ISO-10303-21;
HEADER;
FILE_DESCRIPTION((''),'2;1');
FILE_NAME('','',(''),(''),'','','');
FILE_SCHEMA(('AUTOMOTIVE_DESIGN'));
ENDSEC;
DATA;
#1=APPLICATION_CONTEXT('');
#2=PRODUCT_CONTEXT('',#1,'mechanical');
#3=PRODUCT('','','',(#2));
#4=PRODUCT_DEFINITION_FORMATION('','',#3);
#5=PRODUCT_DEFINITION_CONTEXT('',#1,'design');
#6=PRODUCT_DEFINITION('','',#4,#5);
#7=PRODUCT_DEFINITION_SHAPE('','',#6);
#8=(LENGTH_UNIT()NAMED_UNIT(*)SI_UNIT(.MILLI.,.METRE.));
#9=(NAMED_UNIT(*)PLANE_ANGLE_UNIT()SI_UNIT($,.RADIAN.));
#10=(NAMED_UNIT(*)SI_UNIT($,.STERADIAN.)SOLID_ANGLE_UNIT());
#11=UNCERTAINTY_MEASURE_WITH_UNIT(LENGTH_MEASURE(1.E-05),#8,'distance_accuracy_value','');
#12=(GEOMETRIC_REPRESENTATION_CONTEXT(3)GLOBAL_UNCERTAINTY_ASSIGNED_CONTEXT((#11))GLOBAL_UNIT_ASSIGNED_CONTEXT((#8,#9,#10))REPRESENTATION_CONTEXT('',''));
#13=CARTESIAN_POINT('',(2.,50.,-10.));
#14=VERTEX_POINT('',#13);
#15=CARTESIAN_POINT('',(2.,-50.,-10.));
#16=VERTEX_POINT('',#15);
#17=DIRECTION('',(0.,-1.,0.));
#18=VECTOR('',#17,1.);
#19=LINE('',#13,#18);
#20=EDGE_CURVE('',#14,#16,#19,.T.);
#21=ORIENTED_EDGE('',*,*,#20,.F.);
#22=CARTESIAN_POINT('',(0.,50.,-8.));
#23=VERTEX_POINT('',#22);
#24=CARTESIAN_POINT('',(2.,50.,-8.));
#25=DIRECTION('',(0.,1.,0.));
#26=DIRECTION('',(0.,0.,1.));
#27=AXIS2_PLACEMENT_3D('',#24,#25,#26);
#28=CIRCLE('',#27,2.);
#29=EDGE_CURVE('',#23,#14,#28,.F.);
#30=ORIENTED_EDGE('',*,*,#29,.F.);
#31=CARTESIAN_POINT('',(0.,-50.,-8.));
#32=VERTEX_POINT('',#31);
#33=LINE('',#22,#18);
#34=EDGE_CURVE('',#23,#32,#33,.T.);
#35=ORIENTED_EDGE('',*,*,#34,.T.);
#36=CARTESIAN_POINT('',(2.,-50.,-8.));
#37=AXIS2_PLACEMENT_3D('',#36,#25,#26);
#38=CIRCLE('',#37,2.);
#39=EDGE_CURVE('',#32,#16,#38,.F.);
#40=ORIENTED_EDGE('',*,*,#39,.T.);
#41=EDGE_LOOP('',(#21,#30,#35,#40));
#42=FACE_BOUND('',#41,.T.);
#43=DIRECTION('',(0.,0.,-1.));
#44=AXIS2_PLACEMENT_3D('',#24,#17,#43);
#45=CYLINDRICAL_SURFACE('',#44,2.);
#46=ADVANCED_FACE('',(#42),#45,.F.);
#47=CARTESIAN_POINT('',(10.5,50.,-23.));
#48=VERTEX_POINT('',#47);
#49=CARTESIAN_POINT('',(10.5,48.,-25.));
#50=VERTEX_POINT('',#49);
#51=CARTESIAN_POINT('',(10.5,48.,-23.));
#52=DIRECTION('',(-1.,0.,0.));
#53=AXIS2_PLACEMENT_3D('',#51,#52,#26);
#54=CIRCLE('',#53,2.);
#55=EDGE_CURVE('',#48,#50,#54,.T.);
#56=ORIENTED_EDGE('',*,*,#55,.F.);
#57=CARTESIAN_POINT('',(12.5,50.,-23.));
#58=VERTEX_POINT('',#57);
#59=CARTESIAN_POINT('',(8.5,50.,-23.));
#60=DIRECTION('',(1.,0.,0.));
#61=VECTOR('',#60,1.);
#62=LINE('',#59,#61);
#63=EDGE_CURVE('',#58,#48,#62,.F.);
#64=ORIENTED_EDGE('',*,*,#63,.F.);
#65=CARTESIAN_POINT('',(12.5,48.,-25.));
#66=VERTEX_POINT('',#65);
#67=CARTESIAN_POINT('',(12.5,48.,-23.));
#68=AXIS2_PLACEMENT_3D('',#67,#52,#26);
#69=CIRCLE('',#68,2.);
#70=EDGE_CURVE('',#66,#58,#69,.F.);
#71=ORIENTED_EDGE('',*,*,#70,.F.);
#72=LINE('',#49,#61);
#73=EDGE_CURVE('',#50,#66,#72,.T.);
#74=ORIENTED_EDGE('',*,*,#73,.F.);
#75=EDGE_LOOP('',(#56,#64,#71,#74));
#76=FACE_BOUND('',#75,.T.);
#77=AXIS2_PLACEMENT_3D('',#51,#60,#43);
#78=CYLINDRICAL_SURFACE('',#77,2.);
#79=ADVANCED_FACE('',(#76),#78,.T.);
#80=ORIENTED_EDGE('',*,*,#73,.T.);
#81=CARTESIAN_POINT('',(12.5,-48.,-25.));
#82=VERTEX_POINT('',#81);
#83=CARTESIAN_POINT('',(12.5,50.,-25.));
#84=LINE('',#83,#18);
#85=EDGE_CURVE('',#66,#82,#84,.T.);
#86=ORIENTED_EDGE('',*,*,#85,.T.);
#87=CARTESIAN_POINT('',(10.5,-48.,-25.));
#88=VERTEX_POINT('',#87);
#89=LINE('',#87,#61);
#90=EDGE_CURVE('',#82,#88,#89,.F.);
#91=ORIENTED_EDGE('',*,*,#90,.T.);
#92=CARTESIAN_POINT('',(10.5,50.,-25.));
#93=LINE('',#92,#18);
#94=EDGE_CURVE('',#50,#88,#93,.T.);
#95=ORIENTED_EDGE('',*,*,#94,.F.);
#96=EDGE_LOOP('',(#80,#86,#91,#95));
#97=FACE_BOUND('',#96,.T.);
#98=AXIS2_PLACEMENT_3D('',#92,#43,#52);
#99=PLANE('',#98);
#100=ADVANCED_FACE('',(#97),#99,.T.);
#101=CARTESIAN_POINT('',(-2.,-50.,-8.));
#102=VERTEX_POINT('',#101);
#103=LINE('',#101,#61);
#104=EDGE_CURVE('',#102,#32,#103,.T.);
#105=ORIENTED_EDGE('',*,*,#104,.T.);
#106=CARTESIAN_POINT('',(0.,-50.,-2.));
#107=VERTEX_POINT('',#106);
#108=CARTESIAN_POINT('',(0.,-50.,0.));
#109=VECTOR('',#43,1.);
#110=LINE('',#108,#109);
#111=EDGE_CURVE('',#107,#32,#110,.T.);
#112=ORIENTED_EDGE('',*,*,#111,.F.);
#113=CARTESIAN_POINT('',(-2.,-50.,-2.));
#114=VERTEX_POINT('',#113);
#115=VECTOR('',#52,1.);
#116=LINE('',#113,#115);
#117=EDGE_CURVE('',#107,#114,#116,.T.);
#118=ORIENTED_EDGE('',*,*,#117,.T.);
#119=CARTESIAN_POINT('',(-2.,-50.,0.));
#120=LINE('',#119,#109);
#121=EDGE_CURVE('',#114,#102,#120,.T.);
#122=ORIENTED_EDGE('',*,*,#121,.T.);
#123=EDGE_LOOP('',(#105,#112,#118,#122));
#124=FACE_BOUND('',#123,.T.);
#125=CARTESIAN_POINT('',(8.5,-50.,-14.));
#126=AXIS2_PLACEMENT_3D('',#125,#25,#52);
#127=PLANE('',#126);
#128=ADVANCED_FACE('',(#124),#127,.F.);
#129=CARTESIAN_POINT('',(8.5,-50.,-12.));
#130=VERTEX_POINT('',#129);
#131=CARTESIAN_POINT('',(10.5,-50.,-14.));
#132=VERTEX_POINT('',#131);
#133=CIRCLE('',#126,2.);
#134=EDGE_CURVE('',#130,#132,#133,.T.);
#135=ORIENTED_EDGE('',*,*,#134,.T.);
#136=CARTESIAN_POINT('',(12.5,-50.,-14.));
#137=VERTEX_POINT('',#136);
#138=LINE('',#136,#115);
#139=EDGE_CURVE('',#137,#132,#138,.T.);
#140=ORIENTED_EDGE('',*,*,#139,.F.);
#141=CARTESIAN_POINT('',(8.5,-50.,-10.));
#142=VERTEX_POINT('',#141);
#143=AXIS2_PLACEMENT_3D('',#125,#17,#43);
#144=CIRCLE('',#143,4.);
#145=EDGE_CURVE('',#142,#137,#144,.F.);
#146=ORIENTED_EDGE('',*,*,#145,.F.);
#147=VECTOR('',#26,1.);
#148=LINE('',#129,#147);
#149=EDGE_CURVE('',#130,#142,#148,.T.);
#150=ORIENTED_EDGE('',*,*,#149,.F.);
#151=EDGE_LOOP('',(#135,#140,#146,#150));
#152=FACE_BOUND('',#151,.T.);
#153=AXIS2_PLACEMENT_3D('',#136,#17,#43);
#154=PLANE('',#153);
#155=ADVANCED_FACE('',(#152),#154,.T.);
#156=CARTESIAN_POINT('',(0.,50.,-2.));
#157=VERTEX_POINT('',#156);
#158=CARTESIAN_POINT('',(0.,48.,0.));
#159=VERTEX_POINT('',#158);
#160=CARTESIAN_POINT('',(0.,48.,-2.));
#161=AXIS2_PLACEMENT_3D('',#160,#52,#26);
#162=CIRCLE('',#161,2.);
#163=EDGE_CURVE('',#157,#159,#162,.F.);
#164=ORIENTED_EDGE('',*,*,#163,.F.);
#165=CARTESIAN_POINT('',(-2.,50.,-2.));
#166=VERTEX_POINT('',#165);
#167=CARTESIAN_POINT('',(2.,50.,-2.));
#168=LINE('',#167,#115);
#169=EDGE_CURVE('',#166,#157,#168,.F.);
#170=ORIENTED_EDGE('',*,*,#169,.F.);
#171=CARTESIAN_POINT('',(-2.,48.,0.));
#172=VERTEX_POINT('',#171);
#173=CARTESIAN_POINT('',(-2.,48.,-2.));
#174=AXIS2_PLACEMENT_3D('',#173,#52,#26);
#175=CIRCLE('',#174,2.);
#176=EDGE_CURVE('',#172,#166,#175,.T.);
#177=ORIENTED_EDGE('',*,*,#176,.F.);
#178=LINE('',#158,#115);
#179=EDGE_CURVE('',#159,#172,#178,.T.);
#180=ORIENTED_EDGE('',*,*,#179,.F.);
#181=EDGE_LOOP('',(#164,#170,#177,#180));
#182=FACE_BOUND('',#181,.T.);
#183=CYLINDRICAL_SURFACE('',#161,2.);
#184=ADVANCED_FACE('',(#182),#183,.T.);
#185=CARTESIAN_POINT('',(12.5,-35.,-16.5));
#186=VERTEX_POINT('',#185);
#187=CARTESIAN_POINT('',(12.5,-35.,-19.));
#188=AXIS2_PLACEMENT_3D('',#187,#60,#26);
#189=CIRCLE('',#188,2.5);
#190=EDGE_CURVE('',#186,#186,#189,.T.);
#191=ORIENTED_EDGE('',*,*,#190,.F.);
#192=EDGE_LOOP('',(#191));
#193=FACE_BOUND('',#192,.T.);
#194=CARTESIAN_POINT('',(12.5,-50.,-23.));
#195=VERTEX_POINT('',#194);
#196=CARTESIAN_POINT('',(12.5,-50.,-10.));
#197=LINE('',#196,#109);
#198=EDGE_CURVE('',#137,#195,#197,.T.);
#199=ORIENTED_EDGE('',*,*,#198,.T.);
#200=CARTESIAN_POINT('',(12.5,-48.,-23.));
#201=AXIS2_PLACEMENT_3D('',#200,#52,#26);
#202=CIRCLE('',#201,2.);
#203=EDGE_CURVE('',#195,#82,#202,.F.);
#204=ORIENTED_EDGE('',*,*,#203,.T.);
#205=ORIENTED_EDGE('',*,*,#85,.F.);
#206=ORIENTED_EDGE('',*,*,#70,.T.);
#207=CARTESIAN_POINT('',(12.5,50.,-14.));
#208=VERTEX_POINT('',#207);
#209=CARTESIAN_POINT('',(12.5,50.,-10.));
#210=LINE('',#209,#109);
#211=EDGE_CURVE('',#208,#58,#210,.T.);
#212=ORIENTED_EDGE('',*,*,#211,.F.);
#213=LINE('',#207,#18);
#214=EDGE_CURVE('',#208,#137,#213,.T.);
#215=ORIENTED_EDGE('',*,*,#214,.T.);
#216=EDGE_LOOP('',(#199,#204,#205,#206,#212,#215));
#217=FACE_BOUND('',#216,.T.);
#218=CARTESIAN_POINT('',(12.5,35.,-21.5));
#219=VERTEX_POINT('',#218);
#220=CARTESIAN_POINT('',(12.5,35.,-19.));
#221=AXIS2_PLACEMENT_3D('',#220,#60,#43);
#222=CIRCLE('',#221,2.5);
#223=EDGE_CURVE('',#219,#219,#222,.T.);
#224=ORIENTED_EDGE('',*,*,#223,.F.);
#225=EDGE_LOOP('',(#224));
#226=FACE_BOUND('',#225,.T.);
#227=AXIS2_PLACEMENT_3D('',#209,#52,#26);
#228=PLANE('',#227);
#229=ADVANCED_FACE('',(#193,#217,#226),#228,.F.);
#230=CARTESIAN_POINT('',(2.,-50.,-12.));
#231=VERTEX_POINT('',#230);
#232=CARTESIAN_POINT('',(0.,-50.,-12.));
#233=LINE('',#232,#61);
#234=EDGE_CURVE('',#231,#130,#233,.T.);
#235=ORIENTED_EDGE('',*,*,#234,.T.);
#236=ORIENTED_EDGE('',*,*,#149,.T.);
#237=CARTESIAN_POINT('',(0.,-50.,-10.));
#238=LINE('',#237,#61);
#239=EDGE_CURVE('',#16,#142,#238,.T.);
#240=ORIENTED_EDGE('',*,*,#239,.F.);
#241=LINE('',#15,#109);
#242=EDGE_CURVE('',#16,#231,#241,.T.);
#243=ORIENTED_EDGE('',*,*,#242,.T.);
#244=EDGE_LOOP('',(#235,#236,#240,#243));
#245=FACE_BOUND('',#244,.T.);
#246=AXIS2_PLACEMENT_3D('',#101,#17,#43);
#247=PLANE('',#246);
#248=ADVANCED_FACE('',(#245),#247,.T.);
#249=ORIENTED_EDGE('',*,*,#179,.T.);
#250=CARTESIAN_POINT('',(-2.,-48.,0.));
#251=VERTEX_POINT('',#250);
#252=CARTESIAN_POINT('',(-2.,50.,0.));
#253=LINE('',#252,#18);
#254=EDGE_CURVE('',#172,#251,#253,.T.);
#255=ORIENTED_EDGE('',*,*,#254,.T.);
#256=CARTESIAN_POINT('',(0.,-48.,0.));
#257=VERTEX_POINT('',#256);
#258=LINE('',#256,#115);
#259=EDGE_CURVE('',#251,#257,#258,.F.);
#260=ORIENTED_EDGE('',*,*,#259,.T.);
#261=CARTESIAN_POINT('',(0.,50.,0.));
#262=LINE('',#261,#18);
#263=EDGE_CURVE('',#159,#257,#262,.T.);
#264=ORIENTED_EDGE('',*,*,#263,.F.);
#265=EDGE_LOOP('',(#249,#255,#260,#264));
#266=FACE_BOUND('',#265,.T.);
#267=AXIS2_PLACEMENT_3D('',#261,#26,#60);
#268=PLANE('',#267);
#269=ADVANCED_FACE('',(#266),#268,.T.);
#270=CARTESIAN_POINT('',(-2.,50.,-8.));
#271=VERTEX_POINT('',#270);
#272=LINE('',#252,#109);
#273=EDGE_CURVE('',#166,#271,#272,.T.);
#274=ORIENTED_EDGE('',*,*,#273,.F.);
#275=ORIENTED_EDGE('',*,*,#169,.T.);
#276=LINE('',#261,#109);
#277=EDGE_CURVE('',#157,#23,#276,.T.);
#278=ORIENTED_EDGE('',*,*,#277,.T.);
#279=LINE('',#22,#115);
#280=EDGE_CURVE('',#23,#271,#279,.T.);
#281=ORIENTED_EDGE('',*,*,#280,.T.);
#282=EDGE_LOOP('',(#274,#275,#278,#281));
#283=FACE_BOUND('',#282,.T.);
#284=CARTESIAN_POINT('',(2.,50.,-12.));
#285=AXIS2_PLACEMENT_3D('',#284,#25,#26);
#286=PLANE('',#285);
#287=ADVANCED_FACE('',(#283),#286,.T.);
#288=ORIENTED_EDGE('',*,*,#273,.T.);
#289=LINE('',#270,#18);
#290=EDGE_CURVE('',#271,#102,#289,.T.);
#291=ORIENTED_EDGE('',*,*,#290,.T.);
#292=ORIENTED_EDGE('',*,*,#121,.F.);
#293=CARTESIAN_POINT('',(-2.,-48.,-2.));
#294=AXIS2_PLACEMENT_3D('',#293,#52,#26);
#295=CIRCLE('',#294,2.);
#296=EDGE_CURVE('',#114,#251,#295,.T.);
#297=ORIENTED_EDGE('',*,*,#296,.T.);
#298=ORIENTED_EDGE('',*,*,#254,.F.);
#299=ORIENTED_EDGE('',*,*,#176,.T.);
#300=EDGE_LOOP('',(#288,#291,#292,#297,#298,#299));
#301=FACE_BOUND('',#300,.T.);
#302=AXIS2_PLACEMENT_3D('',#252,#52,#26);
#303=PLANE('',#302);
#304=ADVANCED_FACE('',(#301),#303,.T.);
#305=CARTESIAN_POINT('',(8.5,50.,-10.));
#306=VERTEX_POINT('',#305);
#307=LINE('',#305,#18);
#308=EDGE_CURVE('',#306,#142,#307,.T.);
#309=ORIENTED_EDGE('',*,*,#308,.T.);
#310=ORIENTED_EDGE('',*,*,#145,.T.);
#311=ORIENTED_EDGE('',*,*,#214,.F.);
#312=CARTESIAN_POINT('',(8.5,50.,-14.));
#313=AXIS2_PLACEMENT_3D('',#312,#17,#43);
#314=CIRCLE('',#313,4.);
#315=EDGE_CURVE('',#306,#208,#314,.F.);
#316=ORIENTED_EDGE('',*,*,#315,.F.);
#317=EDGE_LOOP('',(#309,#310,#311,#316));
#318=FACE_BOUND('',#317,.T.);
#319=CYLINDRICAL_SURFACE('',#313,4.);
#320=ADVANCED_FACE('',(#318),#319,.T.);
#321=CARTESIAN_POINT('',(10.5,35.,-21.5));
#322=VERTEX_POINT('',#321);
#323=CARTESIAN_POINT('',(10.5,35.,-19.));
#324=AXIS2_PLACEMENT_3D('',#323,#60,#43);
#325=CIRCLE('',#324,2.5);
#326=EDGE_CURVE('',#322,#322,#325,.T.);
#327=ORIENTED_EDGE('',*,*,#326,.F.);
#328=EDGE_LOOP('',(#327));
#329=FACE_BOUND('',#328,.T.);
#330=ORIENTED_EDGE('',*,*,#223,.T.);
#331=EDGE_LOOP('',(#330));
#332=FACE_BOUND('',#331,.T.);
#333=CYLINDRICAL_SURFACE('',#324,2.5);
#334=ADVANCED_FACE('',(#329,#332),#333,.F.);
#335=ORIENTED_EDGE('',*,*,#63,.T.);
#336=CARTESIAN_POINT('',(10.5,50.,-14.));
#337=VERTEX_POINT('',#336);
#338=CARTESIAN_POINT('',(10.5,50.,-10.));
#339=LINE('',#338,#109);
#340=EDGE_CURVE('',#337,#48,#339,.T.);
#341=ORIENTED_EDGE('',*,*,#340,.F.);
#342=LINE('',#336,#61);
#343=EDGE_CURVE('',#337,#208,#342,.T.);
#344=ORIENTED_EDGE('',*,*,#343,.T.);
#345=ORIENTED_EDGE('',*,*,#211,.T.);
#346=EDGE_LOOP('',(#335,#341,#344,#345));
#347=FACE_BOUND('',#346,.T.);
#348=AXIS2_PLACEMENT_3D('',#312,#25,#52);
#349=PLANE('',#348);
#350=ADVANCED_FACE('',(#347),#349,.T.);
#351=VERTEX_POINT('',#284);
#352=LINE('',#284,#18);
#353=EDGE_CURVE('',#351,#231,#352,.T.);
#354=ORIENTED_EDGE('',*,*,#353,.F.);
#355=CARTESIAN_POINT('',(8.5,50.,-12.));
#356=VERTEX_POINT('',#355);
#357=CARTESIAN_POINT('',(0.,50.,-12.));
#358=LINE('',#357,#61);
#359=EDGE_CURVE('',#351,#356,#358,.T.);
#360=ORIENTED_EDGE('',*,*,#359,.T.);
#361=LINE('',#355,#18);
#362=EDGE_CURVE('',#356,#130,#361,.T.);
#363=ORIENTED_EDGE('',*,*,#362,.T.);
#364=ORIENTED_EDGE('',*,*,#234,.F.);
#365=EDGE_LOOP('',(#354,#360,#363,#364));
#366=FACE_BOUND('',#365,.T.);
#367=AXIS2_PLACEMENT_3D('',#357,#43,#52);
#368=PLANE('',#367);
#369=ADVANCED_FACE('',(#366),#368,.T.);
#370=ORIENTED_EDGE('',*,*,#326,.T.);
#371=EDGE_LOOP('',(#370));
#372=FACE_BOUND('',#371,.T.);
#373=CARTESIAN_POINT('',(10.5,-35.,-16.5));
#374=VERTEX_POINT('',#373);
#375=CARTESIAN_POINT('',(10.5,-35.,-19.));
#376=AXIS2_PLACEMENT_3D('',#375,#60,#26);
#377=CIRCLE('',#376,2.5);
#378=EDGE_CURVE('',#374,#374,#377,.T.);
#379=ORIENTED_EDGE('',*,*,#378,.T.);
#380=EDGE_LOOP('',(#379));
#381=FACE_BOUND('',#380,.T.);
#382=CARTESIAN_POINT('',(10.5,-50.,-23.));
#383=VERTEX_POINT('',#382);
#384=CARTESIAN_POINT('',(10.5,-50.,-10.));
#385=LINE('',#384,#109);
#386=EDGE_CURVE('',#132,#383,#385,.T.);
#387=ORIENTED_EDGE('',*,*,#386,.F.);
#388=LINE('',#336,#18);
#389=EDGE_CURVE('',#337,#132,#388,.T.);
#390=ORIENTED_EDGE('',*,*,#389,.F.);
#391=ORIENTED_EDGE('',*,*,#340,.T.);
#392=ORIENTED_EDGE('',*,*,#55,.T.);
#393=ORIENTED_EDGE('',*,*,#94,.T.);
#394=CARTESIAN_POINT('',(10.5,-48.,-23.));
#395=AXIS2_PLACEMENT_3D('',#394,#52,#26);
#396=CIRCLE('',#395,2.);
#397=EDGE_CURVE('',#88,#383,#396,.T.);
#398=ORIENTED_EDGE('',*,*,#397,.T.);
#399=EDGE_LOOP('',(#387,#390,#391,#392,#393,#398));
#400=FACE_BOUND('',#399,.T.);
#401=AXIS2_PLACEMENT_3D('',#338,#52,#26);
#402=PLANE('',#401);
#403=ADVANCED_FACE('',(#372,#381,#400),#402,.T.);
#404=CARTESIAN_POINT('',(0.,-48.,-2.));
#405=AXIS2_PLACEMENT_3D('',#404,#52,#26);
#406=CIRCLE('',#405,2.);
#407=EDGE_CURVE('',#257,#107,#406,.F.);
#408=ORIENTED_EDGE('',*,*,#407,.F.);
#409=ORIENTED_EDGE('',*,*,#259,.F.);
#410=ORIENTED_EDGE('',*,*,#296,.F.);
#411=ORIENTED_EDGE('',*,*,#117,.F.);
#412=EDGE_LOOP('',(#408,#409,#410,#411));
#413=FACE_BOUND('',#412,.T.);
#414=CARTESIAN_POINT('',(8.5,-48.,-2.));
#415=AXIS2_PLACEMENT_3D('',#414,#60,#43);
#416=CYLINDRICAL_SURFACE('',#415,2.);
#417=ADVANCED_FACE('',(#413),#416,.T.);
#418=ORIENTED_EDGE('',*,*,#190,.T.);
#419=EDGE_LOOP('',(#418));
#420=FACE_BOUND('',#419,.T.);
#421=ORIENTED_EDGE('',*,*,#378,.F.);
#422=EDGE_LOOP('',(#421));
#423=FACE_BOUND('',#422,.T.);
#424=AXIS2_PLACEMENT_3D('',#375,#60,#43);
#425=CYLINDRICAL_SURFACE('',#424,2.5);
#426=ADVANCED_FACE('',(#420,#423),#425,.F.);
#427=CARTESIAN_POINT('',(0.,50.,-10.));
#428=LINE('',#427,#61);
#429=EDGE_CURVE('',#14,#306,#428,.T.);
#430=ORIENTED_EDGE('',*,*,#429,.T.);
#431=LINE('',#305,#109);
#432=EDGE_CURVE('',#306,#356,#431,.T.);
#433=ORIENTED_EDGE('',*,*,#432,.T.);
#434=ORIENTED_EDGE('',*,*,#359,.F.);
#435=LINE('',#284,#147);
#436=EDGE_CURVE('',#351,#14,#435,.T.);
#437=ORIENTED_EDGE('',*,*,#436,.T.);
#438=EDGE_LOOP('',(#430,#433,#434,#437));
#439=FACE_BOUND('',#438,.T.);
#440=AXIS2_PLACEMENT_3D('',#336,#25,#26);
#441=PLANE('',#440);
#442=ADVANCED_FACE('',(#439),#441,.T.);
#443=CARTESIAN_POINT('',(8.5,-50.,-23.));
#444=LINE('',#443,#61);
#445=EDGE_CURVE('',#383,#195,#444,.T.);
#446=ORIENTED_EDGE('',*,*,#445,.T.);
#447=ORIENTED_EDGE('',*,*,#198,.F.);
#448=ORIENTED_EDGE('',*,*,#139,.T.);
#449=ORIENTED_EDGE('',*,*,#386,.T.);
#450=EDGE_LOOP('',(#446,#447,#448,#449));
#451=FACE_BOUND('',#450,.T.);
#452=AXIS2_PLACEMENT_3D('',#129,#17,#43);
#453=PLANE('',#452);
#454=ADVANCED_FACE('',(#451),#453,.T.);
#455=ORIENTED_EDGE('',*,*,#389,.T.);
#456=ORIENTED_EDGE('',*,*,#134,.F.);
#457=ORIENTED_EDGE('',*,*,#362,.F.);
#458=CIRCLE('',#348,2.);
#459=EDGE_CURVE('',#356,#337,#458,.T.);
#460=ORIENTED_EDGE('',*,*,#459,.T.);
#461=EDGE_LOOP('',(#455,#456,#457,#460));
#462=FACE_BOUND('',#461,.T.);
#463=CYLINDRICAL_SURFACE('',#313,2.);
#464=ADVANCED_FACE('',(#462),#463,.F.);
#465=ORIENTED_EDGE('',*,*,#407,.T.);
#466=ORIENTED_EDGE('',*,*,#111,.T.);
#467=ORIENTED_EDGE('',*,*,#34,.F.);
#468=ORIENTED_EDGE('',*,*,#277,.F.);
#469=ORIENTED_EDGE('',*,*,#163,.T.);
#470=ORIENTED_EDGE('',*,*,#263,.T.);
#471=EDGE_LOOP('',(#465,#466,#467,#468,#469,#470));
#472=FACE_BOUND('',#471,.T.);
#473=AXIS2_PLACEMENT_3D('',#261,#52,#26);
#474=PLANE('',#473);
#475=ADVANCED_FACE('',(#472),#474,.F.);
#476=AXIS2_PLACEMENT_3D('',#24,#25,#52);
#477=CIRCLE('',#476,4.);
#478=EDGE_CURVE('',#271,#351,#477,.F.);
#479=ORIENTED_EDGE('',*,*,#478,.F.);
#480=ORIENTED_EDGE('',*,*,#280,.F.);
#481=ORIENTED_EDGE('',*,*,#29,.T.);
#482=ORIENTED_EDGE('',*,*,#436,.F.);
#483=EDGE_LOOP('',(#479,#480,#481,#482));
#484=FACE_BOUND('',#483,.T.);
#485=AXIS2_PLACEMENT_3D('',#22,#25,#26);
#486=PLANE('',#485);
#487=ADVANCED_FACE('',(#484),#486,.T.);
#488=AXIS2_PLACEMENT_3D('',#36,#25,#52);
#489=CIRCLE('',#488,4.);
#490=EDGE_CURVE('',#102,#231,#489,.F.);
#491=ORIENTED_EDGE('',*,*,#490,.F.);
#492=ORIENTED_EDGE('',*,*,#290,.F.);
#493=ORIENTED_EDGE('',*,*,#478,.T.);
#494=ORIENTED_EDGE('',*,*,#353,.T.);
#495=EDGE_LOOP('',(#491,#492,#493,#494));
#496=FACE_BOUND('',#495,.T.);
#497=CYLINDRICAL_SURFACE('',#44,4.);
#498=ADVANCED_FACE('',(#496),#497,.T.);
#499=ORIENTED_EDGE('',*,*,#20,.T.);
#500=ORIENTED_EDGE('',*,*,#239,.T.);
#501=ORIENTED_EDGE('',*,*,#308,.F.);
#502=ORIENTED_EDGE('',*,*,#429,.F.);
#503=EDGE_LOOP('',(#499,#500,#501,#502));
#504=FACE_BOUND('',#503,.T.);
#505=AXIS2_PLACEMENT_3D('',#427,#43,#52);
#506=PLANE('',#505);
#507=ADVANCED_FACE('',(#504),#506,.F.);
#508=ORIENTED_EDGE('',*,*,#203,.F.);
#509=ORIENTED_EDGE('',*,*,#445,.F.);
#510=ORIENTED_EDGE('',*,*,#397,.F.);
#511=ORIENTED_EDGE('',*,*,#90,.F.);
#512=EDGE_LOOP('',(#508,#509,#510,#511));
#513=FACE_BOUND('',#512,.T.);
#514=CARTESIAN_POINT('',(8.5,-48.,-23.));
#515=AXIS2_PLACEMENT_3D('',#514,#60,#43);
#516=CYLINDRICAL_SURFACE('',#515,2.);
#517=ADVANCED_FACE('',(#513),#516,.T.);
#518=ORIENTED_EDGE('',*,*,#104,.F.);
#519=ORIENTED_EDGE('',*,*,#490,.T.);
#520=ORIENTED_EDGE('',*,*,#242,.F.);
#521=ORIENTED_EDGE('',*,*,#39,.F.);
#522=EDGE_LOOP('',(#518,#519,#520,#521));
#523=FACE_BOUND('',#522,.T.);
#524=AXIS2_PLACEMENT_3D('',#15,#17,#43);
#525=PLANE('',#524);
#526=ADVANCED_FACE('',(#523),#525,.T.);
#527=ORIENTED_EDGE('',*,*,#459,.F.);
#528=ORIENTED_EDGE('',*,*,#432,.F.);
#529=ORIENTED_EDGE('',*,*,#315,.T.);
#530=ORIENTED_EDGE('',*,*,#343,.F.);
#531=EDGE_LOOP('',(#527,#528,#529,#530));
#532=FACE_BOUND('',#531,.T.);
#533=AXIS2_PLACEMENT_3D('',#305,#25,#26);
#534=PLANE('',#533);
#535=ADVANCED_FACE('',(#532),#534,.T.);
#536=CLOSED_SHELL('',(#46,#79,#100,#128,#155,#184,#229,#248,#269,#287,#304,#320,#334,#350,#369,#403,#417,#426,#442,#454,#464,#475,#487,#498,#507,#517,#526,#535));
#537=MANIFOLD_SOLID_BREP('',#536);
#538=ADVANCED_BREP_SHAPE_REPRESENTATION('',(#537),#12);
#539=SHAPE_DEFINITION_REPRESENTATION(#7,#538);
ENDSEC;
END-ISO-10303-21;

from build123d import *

# Parameters (mm, degrees)
BASE_FLANGE1_DEPTH = 50
SKETCH3_R          = 2.5
EXTRUDE1_DEPTH     = 2
FILLET1_R          = 2


# Sheet-metal steps are written as plain solids
with BuildPart() as part:
    # Sketch1 → Base-Flange1 (new, symmetric)
    with BuildSketch(Plane(origin=(0, 0, 0), x_dir=(-1, 0, 0), z_dir=(0, 1, 0))):
        with BuildLine():
            Line((0, 0), (0, -8))
            ThreePointArc((0, -8), (-0.585786438, -9.414213562), (-2, -10))
            Line((-2, -10), (-8.5, -10))
            ThreePointArc((-8.5, -10), (-11.328427125, -11.171572875), (-12.5, -14))
            Line((-12.5, -14), (-12.5, -25))
            Line((-12.5, -25), (-10.5, -25))
            Line((-10.5, -25), (-10.5, -14))
            ThreePointArc((-10.5, -14), (-9.914213562, -12.585786438), (-8.5, -12))
            Line((-8.5, -12), (-2, -12))
            ThreePointArc((-2, -12), (0.828427125, -10.828427125), (2, -8))
            Line((2, -8), (2, 0))
            Line((2, 0), (0, 0))
        make_face()
    extrude(amount=BASE_FLANGE1_DEPTH, both=True)

    # Sketch3 → Extrude1 (cut)
    with BuildSketch(Plane(origin=(12.5, 0, 0), x_dir=(0, 0, 1), z_dir=(1, 0, 0))):
        with Locations((-19, 35)):
            Circle(SKETCH3_R)
        with Locations(Location((-19, -35, 0), (0, 0, 180))):
            Circle(SKETCH3_R)
    extrude(amount=-EXTRUDE1_DEPTH, mode=Mode.SUBTRACT)

    # Fillet1
    fillet1_edges = [part.edges().sort_by_distance(p)[0] for p in [
        (-1, -50, 0),
        (11.5, -50, -25),
        (-1, 50, 0),
        (11.5, 50, -25),
    ]]
    fillet(fillet1_edges, radius=FILLET1_R)


solid = part.part
